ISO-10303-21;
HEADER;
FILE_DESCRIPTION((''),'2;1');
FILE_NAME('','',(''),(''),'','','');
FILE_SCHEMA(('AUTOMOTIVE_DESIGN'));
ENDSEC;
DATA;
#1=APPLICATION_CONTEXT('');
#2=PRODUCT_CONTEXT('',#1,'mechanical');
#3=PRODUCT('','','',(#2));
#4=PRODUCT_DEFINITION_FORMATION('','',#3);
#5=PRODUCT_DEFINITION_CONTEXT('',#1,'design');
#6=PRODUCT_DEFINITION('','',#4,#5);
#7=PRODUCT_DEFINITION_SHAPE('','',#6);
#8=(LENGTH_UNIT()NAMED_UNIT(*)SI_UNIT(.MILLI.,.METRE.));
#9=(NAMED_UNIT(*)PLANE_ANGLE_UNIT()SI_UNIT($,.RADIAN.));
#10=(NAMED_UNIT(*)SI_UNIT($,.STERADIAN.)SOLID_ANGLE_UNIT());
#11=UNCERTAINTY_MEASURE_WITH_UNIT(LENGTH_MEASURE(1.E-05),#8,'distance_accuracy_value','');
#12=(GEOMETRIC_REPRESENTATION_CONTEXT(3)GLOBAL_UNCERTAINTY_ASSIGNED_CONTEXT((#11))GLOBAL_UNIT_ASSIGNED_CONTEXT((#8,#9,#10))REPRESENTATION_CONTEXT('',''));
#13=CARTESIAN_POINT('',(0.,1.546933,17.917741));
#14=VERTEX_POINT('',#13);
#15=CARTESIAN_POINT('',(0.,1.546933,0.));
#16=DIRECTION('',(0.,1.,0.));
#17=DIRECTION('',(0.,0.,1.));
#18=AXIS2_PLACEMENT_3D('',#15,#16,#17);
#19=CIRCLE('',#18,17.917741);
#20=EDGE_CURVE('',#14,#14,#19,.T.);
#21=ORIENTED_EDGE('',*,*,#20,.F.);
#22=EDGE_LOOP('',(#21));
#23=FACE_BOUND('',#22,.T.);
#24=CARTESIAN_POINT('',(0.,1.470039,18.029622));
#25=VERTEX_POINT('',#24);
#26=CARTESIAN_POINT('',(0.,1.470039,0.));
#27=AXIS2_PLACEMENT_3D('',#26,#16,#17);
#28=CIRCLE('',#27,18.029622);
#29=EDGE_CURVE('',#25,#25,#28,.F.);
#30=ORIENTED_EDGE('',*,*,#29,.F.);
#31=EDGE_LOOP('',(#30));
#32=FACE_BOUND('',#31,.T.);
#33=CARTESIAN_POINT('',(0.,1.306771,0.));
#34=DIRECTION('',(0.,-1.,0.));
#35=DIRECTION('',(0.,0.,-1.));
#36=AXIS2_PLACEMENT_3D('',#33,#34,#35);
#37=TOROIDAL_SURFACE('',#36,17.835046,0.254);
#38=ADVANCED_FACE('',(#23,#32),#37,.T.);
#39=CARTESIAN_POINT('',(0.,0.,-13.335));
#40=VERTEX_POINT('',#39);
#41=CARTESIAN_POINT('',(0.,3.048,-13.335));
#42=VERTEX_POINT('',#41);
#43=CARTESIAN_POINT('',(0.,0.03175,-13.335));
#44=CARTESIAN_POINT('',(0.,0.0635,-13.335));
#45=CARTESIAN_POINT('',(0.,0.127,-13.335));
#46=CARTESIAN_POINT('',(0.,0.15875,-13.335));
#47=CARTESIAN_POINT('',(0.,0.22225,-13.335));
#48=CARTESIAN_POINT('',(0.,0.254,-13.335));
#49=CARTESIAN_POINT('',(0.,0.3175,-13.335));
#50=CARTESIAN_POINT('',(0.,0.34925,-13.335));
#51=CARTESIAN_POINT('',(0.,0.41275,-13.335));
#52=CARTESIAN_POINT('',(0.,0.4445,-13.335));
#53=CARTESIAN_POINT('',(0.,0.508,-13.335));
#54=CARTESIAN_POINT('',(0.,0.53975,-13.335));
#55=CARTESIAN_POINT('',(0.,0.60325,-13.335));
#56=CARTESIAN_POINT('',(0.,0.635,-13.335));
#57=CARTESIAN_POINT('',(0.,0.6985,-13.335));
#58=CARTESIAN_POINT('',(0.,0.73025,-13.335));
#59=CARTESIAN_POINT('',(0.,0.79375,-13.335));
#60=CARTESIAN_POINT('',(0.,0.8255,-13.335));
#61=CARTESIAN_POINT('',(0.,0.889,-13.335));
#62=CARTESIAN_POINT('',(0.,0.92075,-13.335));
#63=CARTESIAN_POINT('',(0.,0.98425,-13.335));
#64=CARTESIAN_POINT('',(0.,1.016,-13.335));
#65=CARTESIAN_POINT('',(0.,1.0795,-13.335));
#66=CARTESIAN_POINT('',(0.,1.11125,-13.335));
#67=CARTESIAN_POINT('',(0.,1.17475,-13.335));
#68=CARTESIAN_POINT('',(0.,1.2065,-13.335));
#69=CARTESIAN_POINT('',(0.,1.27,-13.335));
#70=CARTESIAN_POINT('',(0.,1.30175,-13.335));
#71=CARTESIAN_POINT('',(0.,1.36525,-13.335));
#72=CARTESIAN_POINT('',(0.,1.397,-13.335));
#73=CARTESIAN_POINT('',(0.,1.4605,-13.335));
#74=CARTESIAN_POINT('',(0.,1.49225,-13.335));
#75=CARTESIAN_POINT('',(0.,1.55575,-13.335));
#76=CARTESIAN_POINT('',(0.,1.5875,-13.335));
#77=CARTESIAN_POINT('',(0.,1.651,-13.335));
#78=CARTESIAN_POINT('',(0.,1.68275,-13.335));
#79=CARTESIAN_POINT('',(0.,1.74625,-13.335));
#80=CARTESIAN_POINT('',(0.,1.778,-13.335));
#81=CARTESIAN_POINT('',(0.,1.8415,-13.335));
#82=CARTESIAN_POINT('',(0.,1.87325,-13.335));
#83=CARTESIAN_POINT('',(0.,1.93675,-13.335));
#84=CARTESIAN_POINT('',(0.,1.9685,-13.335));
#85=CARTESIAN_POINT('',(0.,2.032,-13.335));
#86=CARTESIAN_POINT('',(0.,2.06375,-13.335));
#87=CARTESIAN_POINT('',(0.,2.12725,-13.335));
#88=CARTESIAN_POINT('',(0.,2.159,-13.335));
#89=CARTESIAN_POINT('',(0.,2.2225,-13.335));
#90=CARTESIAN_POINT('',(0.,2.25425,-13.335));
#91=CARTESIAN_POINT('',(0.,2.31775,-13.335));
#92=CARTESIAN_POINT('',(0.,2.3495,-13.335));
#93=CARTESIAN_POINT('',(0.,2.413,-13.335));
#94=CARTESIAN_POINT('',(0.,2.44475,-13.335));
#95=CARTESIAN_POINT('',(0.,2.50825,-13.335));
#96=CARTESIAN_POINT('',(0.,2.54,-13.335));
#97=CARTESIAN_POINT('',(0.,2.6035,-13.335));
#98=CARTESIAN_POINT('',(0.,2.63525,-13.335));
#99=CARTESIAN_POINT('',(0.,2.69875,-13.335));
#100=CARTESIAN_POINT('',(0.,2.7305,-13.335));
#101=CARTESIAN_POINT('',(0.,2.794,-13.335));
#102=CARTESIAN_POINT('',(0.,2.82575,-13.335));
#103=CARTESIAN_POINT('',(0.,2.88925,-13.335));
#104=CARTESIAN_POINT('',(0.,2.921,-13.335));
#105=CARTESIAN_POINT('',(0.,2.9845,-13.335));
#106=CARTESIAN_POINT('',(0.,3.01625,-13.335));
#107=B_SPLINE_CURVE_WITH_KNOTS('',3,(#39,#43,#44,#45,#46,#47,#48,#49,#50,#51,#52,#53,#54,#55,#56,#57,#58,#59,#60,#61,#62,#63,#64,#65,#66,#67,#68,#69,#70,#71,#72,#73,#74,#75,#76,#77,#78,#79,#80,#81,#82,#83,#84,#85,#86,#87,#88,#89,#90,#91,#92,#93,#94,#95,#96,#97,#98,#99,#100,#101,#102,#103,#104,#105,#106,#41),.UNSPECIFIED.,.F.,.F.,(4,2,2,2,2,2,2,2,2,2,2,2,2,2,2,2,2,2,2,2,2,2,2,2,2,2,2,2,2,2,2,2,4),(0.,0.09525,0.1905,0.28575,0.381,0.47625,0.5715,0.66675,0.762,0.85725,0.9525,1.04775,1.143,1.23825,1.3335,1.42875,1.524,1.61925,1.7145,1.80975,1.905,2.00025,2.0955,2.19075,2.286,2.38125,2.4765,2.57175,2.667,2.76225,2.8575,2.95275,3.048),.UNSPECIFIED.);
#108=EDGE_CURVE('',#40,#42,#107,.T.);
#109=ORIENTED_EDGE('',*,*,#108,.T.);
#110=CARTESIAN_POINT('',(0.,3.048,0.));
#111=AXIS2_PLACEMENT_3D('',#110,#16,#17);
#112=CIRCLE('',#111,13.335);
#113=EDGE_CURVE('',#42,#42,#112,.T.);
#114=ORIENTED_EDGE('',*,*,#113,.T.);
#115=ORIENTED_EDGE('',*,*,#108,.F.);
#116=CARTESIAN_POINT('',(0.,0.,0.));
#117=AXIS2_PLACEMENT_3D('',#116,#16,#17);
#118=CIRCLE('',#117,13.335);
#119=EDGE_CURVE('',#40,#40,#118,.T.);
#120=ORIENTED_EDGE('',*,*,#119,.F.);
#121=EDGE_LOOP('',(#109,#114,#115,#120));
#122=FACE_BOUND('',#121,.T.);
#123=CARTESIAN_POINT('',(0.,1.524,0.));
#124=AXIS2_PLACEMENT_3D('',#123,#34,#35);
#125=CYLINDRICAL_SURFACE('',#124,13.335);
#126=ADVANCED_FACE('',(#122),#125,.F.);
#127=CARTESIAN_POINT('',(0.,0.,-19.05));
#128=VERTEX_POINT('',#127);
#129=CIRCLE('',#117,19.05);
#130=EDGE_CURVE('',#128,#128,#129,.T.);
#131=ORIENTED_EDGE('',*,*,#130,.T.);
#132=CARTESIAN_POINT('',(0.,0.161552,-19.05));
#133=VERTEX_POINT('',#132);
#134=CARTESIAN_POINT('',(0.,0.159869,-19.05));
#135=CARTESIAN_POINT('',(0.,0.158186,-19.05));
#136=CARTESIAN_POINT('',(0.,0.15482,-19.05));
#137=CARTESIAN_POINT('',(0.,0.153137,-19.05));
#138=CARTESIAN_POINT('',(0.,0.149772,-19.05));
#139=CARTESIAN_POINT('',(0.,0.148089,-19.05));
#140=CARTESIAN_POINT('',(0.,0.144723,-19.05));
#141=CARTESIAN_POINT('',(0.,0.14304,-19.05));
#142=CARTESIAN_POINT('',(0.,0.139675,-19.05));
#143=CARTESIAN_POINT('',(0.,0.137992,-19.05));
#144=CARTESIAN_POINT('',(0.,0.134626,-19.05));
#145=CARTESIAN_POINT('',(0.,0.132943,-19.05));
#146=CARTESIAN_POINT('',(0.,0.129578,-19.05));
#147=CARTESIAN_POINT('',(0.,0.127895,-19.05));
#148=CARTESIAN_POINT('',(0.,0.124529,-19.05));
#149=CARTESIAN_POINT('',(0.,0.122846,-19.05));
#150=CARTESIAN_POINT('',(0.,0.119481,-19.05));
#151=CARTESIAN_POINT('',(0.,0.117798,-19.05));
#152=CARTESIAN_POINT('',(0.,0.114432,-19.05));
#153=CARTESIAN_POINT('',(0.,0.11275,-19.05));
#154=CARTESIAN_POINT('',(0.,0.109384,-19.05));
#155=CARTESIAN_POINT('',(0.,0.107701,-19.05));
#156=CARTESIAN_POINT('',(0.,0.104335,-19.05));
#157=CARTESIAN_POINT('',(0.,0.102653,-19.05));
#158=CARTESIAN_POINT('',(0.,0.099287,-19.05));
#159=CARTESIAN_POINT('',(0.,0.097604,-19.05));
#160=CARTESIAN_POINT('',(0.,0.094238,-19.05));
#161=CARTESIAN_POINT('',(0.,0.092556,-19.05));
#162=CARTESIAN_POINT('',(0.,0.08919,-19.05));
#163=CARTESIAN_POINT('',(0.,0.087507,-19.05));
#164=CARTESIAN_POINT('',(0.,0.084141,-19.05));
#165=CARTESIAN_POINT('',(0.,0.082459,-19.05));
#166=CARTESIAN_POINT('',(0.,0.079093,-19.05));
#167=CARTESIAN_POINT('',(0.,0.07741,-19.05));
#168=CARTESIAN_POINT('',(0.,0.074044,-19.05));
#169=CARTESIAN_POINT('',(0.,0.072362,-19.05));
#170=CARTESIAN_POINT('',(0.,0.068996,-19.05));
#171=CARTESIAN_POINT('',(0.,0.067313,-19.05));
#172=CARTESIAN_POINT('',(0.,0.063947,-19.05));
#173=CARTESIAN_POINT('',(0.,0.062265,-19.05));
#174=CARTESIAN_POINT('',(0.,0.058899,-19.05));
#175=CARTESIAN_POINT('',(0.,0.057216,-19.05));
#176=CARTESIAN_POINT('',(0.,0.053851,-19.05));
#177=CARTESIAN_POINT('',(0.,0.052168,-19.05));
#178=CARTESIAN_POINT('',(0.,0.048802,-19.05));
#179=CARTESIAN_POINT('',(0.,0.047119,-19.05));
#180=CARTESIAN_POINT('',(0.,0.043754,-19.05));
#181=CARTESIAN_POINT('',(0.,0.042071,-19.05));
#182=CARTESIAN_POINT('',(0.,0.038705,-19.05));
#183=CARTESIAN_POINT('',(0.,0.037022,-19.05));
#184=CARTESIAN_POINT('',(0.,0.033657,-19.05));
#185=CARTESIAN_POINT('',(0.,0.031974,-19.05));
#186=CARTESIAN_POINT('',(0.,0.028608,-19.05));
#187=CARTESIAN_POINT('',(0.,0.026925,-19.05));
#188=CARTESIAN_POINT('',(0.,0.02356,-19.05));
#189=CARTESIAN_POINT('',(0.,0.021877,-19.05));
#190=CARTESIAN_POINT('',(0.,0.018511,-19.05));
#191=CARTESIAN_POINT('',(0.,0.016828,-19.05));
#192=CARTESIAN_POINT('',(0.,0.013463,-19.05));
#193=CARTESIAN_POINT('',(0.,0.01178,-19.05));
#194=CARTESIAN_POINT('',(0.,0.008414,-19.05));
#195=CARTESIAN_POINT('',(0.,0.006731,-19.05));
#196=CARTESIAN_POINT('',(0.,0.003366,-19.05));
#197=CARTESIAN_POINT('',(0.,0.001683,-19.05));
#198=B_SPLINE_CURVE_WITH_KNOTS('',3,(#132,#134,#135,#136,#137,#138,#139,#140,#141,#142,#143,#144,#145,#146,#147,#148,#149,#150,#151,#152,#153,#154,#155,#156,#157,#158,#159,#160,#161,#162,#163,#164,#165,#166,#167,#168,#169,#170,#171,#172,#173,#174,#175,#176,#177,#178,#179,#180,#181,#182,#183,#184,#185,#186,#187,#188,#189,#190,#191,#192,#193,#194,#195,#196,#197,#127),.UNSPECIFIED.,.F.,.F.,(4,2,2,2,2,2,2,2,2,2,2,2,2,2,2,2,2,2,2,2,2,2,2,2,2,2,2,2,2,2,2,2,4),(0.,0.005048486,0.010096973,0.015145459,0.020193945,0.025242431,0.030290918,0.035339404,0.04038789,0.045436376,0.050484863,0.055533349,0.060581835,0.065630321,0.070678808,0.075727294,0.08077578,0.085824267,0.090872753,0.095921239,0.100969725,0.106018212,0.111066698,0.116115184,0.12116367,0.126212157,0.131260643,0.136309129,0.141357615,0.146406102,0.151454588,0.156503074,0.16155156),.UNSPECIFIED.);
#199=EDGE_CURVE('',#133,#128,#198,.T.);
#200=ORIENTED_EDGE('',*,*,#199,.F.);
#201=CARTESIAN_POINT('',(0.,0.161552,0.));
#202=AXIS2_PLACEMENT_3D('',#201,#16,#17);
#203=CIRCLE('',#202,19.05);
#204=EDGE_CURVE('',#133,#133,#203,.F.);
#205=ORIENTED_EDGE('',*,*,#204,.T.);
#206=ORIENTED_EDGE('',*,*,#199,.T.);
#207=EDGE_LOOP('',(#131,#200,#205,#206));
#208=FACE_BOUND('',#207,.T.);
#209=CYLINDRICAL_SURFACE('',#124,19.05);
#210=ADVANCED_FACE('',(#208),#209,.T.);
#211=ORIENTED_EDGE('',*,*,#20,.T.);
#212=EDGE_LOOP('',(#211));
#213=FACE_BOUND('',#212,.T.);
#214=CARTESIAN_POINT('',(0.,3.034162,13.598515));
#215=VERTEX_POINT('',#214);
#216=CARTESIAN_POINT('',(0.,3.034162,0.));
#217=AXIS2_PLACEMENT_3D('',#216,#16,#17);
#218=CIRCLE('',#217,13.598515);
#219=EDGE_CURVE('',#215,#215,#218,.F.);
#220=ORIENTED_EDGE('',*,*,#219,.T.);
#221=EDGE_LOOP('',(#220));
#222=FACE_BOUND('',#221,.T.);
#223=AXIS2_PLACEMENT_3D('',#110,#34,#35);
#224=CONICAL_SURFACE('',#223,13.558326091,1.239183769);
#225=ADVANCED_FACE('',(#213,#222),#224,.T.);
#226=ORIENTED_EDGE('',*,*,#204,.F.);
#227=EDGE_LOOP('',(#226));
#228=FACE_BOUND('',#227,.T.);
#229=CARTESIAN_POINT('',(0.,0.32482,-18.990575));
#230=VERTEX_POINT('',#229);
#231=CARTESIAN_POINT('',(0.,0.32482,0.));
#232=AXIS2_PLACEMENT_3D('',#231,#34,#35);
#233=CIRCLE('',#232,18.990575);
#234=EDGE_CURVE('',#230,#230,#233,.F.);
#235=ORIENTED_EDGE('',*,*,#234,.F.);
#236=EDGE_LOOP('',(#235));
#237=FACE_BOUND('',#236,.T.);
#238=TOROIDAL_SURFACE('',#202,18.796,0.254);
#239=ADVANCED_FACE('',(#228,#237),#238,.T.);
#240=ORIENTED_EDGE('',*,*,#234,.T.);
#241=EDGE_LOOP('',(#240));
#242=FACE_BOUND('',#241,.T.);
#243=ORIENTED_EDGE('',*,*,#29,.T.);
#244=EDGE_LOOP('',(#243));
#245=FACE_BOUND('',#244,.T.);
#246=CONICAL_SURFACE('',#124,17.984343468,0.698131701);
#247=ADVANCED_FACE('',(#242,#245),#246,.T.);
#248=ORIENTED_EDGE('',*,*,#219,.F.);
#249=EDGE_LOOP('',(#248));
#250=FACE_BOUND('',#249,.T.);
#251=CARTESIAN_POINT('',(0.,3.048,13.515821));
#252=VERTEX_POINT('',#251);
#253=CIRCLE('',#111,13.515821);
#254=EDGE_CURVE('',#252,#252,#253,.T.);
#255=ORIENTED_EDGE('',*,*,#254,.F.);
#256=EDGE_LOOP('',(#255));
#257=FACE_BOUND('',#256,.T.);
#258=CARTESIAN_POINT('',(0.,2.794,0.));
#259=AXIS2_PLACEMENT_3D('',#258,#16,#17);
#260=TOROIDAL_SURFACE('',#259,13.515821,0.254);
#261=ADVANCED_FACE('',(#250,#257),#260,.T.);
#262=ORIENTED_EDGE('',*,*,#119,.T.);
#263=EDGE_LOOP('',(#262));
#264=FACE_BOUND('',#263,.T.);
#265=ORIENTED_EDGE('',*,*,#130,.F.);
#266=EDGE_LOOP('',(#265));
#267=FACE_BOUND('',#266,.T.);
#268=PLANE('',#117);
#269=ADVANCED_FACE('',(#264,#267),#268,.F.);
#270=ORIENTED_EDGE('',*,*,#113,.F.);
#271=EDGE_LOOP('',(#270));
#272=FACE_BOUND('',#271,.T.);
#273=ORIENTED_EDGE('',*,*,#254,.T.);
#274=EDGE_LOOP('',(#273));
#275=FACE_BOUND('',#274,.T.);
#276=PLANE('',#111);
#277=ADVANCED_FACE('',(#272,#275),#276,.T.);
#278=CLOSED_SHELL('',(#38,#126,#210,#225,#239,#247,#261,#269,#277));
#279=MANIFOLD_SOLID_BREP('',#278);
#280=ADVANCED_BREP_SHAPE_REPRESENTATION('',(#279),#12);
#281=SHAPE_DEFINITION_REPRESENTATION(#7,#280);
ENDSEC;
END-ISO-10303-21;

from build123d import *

# Parameters (mm, degrees)
SKETCH1_R       = 19.05
SKETCH1_R_2     = 13.335
EXTRUDE1_DEPTH  = 1.524
CHAMFER1_SIZE   = 1.27
CHAMFER1_SIZE2  = 1.065656532
SKETCH2_R       = 17.984343468
SKETCH2_R_2     = 13.335
EXTRUDE2_DEPTH  = 1.524
CHAMFER2_SIZE   = 4.426017378
CHAMFER2_SIZE_2 = 1.524
FILLET1_R       = 0.254


with BuildPart() as part:
    # Sketch1 → Extrude1 (new body)
    with BuildSketch(Plane(origin=(0, 0, 0), x_dir=(1, 0, 0), z_dir=(0, 1, 0))):
        with Locations(Location((0, 0, 0), (0, 0, 90))):
            Circle(SKETCH1_R)
        with Locations(Location((0, 0, 0), (0, 0, 90))):
            Circle(SKETCH1_R_2, mode=Mode.SUBTRACT)
    extrude(amount=EXTRUDE1_DEPTH)

    # Chamfer1
    chamfer1_edges = [part.edges().sort_by_distance(p)[0] for p in [
        (0, 1.524, 19.05),
    ]]
    chamfer1_side = [part.faces().sort_by_distance(p)[0] for p in [
        (0, 0.762, 19.05),
    ]]
    chamfer(chamfer1_edges, length=CHAMFER1_SIZE, length2=CHAMFER1_SIZE2, reference=chamfer1_side[0])

    # Sketch2 → Extrude2 (add)
    with BuildSketch(Plane(origin=(0, 1.524, 0), x_dir=(-1, 0, 0), z_dir=(0, 1, 0))):
        with Locations(Location((0, 0, 0), (0, 0, 270))):
            Circle(SKETCH2_R)
        with Locations(Location((0, 0, 0), (0, 0, 270))):
            Circle(SKETCH2_R_2, mode=Mode.SUBTRACT)
    extrude(amount=EXTRUDE2_DEPTH)

    # Chamfer2
    # the kernel refuses this chamfer: 4.426017378, 1.524 mm, written as the material it takes off along each edge
    with BuildSketch(Plane(origin=(0, 3.048, 0), x_dir=(0, 0, -1), z_dir=(1, 0, 0))) as chamfer2_piece_1:
        Polygon((17.984343468 - CHAMFER2_SIZE, 0), (17.984343468, -CHAMFER2_SIZE_2), (17.984343468, 0), align=None)
    revolve(axis=Axis((0, 3.048, 0), (0, 1, 0)), mode=Mode.SUBTRACT)

    # Fillet1
    fillet1_edges = [part.edges().sort_by_distance(p)[0] for p in [
        (0, 3.048, 13.55832609),
        (0, 1.524, 17.984343468),
        (0, 0.254, 19.05),
    ]]
    fillet(fillet1_edges, radius=FILLET1_R)


solid = part.part
